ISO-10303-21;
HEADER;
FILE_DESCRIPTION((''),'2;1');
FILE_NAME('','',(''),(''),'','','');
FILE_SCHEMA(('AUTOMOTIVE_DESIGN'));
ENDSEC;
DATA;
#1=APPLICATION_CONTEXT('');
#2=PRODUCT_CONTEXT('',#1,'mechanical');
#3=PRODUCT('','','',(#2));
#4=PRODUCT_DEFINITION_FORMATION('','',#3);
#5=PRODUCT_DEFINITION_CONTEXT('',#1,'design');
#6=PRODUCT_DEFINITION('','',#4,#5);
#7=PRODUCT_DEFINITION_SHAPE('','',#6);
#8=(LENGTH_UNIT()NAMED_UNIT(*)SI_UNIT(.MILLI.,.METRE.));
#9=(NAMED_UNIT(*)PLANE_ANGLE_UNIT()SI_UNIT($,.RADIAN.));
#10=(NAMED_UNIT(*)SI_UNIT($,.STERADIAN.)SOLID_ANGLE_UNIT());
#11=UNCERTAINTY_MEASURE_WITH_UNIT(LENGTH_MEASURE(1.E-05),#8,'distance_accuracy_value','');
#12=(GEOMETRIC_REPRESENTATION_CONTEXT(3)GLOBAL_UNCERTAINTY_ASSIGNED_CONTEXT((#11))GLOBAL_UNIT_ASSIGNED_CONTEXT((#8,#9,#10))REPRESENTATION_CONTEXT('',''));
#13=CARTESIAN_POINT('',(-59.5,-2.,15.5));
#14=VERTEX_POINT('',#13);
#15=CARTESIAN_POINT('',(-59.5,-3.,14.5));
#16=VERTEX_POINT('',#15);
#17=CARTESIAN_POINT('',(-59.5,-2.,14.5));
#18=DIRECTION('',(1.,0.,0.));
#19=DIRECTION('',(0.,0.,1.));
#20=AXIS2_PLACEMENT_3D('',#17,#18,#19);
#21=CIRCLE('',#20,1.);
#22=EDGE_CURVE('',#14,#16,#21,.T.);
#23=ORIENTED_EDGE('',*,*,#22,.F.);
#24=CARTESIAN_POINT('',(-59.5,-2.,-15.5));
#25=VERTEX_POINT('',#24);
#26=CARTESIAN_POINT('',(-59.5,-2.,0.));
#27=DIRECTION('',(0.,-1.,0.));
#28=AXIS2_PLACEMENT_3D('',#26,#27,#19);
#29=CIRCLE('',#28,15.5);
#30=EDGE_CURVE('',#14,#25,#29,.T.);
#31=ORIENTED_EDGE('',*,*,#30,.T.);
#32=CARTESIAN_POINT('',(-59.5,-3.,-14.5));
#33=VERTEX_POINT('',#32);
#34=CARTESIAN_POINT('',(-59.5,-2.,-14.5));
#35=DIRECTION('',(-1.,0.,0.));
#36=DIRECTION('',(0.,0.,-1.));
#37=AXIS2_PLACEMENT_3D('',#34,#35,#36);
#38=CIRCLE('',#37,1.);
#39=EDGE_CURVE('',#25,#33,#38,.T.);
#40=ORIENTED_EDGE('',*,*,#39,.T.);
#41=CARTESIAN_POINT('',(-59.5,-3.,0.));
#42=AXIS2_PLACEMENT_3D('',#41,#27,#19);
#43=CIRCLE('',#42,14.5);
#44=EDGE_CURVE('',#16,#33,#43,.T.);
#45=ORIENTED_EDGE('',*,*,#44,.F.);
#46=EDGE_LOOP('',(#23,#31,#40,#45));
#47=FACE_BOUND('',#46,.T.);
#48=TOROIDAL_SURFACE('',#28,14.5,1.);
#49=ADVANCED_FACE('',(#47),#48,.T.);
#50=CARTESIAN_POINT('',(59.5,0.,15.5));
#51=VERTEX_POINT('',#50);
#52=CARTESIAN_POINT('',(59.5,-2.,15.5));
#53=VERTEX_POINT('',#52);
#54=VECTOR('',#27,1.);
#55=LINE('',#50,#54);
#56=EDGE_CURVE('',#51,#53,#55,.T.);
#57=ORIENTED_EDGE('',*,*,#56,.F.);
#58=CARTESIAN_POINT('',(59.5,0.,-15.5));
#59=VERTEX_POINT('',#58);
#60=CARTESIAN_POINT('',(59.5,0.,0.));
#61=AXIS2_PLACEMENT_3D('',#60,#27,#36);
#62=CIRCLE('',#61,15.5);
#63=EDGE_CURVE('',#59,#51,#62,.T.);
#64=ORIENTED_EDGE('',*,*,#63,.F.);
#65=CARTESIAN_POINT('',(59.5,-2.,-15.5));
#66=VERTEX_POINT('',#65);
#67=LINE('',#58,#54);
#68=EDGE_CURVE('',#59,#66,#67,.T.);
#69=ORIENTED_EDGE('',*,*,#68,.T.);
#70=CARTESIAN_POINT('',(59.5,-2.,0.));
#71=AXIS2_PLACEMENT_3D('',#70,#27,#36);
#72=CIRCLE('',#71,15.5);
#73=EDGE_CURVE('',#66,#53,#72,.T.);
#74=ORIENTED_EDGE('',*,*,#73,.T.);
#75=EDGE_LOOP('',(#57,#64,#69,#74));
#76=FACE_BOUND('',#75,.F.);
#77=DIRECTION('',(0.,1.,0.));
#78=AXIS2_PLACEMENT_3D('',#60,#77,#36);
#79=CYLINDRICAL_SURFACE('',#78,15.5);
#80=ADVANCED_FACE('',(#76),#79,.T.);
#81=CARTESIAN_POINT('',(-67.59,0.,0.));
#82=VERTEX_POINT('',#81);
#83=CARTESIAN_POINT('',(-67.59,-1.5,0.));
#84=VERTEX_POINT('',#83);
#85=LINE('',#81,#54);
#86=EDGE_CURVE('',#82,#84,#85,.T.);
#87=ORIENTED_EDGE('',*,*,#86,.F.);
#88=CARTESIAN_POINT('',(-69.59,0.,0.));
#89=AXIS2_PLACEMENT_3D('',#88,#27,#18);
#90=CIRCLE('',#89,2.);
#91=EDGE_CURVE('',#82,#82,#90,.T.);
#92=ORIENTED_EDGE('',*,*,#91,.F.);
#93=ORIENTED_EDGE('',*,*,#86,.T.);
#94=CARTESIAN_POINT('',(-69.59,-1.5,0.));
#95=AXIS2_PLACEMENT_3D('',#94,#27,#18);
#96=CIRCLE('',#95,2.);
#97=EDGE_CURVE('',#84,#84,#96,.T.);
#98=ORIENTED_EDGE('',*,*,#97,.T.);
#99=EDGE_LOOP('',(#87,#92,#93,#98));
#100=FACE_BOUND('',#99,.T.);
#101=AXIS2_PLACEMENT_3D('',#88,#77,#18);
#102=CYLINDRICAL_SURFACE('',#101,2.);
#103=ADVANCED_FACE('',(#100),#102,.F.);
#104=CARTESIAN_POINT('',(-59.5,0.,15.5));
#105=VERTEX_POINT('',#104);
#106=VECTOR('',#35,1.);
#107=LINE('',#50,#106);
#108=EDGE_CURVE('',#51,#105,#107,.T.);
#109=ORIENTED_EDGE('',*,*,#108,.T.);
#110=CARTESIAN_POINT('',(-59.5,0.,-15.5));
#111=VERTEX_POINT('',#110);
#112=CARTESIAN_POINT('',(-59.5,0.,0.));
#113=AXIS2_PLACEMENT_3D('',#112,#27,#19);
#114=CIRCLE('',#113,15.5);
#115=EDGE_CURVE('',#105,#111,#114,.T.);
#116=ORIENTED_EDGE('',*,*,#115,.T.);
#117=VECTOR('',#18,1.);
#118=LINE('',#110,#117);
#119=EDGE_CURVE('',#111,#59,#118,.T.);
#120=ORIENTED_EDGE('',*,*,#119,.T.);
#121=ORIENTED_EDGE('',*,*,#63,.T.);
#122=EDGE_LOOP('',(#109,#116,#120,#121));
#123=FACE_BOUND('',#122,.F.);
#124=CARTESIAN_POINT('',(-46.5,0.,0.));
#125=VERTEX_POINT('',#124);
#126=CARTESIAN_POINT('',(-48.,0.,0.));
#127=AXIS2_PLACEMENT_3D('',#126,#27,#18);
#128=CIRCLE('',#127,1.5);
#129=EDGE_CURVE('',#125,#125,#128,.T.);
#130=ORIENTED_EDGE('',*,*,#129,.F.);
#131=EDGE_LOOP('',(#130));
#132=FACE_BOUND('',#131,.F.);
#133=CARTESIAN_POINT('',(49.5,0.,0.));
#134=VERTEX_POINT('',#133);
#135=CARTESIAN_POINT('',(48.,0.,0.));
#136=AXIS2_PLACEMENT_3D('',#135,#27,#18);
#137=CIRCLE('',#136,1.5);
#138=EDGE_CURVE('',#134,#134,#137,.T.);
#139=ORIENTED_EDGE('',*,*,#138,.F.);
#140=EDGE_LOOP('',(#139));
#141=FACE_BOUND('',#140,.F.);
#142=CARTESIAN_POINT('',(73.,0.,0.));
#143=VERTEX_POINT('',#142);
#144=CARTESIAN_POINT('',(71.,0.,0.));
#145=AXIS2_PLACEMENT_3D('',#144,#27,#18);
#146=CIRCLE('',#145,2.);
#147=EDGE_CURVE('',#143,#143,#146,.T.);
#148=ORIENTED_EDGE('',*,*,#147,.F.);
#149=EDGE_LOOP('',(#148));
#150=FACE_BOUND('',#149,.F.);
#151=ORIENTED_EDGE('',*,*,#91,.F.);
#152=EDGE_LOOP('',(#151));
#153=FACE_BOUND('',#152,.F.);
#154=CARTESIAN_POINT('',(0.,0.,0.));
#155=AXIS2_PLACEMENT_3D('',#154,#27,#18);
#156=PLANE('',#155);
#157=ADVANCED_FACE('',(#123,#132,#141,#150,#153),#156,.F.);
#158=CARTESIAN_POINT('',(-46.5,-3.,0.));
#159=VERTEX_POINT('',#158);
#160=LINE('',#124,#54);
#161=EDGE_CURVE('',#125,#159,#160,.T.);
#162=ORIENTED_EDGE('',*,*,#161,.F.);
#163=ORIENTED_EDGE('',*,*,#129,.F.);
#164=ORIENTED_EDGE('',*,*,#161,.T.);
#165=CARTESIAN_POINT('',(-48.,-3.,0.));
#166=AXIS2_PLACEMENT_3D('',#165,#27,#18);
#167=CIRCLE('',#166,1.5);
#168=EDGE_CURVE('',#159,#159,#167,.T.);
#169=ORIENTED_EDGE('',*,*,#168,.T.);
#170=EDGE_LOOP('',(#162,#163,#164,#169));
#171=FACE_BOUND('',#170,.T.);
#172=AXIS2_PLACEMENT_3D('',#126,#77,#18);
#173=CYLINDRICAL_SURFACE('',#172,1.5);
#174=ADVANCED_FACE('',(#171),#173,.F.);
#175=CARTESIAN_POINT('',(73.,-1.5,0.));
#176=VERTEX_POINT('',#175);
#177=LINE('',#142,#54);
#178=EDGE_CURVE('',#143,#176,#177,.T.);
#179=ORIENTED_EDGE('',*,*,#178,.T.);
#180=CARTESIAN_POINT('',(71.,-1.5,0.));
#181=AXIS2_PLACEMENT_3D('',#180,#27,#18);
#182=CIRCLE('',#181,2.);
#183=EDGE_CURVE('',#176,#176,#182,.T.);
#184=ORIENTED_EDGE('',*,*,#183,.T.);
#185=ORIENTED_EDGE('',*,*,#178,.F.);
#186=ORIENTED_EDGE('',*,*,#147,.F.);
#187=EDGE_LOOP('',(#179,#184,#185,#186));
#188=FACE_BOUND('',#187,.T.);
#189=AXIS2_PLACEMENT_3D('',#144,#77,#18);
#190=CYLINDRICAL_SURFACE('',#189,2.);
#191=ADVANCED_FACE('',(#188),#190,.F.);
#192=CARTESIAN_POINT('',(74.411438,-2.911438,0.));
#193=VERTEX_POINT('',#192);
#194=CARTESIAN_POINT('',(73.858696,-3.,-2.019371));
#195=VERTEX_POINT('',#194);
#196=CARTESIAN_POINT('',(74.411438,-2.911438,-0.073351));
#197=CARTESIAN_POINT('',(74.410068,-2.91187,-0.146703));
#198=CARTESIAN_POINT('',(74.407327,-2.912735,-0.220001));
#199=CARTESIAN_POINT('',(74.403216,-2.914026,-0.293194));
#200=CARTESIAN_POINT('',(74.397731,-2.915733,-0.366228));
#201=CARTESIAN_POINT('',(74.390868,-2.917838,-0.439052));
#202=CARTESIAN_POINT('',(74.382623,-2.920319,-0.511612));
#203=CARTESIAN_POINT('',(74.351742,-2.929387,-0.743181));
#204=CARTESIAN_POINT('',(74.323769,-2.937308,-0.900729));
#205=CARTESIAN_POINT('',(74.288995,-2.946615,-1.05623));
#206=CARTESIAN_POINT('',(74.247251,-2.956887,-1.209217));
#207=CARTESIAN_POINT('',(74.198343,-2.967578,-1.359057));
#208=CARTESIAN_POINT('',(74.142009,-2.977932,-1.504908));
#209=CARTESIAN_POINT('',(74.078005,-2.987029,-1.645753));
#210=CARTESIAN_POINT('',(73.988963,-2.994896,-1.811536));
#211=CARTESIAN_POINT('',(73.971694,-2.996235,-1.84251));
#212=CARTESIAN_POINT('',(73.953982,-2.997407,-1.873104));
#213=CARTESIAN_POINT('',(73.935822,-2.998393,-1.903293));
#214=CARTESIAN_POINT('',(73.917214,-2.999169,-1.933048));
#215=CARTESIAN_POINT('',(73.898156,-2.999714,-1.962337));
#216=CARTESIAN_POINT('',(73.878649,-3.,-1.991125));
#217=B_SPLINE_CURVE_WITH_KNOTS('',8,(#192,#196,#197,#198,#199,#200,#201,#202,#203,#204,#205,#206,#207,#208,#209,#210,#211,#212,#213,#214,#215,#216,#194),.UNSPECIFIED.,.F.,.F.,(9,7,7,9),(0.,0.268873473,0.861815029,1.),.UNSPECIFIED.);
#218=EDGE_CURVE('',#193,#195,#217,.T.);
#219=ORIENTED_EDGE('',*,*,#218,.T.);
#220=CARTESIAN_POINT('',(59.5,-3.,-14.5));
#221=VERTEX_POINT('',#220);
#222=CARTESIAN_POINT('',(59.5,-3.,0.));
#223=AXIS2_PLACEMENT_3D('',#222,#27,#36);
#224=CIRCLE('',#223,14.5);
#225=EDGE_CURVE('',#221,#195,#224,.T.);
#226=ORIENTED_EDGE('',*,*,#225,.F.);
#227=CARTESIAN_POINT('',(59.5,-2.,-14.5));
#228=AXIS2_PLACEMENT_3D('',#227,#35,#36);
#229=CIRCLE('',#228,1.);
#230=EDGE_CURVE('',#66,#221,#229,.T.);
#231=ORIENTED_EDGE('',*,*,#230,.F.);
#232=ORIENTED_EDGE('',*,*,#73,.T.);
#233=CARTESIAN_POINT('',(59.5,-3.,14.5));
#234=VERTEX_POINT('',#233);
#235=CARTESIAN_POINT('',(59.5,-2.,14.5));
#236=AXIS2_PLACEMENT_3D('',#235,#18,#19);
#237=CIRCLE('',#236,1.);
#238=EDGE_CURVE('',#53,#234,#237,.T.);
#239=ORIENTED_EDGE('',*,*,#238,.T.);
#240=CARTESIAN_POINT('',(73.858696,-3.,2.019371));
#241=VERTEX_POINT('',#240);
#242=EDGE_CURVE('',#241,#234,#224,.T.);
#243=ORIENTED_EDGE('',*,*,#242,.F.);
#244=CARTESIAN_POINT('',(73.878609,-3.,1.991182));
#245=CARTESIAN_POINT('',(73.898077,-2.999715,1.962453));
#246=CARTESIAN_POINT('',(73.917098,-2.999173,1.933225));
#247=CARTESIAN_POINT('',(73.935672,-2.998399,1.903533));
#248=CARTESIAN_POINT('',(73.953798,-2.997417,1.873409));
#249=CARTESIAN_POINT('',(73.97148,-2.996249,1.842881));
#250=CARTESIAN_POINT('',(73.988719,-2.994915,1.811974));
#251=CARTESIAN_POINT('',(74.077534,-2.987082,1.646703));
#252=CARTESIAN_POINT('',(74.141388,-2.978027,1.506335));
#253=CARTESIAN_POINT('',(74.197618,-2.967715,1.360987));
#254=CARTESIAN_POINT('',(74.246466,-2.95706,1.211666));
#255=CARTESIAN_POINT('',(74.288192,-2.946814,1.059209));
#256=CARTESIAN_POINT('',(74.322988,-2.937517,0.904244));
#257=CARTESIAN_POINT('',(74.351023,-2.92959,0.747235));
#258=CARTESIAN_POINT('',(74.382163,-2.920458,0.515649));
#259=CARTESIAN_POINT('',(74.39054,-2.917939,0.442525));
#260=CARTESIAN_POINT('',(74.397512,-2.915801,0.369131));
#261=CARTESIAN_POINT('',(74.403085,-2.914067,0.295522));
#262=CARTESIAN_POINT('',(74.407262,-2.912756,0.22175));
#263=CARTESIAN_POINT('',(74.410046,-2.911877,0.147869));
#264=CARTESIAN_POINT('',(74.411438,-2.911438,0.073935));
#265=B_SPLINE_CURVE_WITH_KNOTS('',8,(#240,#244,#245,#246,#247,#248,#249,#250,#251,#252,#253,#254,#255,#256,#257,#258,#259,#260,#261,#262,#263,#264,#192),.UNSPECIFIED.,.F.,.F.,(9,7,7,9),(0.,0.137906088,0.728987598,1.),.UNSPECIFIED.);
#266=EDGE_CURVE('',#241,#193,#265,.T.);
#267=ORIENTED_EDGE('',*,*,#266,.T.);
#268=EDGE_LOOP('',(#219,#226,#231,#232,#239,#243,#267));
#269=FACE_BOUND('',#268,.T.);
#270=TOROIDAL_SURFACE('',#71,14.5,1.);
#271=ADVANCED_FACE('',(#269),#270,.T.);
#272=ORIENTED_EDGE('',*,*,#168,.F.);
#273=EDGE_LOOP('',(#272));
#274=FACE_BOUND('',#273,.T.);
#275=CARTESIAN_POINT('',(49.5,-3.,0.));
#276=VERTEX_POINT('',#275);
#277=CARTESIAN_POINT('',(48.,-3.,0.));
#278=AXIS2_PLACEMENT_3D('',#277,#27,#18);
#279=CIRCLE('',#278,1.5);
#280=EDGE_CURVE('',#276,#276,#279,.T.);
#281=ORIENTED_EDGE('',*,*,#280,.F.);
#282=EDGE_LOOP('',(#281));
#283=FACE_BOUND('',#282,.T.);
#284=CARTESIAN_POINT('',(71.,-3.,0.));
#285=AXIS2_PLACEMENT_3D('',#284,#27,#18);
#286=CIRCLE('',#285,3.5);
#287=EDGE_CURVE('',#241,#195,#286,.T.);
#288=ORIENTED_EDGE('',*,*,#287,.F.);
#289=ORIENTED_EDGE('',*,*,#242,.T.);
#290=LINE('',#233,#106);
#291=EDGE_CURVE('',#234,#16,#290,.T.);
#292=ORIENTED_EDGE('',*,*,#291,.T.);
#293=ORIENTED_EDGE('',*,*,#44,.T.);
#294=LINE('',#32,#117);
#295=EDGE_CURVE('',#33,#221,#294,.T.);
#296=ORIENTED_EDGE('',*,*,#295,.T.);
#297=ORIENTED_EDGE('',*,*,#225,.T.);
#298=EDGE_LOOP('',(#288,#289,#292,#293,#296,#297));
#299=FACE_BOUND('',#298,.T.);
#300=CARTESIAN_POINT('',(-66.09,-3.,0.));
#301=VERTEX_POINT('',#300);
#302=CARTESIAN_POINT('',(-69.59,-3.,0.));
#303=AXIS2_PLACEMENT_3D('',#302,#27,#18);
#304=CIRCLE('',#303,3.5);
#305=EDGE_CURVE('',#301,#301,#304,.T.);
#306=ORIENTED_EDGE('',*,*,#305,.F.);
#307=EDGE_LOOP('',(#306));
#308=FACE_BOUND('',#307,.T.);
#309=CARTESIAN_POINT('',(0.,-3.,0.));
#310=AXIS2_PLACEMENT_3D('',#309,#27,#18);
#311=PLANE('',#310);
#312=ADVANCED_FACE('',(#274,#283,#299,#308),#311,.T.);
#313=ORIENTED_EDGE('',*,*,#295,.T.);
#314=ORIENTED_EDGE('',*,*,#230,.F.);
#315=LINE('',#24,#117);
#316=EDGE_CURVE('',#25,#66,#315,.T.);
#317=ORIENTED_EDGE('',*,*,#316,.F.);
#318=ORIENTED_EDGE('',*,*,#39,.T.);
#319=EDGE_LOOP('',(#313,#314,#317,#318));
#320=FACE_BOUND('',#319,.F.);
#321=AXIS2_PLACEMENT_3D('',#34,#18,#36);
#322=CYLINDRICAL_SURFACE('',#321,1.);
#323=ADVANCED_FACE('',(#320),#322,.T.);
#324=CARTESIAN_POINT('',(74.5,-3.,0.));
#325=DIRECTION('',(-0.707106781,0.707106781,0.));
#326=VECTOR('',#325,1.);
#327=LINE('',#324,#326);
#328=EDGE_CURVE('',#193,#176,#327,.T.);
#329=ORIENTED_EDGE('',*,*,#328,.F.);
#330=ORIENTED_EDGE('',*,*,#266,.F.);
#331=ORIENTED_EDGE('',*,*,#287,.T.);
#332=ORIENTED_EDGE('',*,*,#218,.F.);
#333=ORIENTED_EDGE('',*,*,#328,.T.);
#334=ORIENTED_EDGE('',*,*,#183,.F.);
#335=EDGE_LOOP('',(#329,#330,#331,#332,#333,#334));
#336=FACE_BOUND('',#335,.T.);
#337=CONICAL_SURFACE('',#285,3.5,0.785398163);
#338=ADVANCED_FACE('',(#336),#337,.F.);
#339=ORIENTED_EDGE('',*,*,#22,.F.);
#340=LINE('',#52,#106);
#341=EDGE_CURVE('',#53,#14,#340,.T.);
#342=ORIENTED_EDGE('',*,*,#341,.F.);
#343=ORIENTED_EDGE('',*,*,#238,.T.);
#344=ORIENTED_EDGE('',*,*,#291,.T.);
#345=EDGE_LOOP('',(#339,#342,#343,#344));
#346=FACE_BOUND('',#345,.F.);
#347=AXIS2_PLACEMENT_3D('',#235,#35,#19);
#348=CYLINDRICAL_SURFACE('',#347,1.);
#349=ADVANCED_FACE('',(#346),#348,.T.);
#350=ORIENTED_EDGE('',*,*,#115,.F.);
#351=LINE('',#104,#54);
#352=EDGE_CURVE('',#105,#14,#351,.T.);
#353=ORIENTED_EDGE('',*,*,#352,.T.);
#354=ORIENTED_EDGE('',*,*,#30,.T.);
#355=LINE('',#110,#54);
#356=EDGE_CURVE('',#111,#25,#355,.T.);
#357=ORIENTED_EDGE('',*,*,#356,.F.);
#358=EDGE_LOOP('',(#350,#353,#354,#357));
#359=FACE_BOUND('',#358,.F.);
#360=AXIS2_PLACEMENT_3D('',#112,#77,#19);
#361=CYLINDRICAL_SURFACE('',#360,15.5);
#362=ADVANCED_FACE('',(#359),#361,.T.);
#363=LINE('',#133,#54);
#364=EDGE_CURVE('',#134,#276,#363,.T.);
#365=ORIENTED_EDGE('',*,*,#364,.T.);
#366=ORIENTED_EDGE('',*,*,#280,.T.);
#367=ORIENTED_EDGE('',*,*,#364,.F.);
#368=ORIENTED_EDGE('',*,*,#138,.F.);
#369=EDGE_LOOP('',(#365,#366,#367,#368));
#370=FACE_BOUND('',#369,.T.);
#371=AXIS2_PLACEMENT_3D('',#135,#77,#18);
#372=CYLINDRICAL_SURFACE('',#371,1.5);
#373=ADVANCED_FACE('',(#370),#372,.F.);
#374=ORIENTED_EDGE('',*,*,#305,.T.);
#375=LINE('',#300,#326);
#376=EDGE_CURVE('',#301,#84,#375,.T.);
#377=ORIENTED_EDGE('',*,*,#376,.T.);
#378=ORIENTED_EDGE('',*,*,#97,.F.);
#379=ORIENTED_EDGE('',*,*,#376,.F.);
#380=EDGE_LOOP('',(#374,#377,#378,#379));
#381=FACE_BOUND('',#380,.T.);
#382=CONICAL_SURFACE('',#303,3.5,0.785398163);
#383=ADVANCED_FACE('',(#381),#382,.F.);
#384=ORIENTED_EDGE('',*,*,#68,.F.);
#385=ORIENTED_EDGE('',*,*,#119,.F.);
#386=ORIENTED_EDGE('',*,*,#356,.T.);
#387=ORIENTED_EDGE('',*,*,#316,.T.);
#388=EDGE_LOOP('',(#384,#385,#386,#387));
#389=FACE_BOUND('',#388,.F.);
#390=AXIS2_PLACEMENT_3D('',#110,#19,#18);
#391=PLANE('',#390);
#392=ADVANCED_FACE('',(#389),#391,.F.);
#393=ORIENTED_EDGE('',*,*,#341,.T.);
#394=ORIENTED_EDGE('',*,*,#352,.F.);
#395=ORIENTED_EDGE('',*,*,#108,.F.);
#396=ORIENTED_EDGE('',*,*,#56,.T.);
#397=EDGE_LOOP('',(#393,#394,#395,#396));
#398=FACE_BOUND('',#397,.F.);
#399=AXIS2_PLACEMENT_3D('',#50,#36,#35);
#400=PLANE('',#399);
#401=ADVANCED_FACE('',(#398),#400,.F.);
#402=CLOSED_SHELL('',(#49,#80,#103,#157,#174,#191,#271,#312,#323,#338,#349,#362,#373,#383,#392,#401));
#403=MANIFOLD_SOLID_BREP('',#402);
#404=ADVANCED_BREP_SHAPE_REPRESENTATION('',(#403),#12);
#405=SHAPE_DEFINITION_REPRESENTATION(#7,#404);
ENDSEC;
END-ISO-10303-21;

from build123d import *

# Parameters (mm, degrees)
F0_R     = 2
F0_R_2   = 1.5
F1_DEPTH = 3
F2_R     = 1


# Not quite as in the source:
# - a fillet or chamfer that OpenCascade refuses, or shapes differently, is made with other operations: its cross-section is extruded or revolved along the edge and cut away or added


with BuildPart() as f1:
    # F0 (on Front) → F1 (new body)
    with BuildSketch(Plane.XZ):
        with BuildLine():
            Line((59.5, 15.5), (-59.5, 15.5))
            ThreePointArc((-59.5, 15.5), (-75, 0), (-59.5, -15.5))
            Line((-59.5, -15.5), (59.5, -15.5))
            ThreePointArc((59.5, -15.5), (75, 0), (59.5, 15.5))
        make_face()
        with Locations((-69.59, 0)):
            Circle(F0_R, mode=Mode.SUBTRACT)
        with Locations((-48, 0)):
            Circle(F0_R_2, mode=Mode.SUBTRACT)
        with Locations((48, 0)):
            Circle(F0_R_2, mode=Mode.SUBTRACT)
        with Locations((71, 0)):
            Circle(F0_R, mode=Mode.SUBTRACT)
    extrude(amount=F1_DEPTH)

    # F2
    f2_edges = [f1.edges().sort_by_distance(p)[0] for p in [
        (0, -3, 15.5),
        (-75, -3, 0),
        (0, -3, -15.5),
        (75, -3, 0),
    ]]
    fillet(f2_edges, radius=F2_R)

    # F3: chamfer of 1.5 on 2 edges, made by hand

    # F3_s1 → F3_t2 (revolve, cut)
    with BuildSketch(Plane.XY):
        Polygon((-66.09, -3), (-67.59, -1.5), (-67.59, -3), align=None)
    revolve(axis=Axis((-69.59, -3, 0), (0, -1, 0)), mode=Mode.SUBTRACT)

    # F3_s3 → F3_t4 (revolve, cut)
    with BuildSketch(Plane.XY):
        Polygon((74.5, -3), (73, -1.5), (73, -3), align=None)
    revolve(axis=Axis((71, -3, 0), (0, -1, 0)), mode=Mode.SUBTRACT)


solid = f1.part
